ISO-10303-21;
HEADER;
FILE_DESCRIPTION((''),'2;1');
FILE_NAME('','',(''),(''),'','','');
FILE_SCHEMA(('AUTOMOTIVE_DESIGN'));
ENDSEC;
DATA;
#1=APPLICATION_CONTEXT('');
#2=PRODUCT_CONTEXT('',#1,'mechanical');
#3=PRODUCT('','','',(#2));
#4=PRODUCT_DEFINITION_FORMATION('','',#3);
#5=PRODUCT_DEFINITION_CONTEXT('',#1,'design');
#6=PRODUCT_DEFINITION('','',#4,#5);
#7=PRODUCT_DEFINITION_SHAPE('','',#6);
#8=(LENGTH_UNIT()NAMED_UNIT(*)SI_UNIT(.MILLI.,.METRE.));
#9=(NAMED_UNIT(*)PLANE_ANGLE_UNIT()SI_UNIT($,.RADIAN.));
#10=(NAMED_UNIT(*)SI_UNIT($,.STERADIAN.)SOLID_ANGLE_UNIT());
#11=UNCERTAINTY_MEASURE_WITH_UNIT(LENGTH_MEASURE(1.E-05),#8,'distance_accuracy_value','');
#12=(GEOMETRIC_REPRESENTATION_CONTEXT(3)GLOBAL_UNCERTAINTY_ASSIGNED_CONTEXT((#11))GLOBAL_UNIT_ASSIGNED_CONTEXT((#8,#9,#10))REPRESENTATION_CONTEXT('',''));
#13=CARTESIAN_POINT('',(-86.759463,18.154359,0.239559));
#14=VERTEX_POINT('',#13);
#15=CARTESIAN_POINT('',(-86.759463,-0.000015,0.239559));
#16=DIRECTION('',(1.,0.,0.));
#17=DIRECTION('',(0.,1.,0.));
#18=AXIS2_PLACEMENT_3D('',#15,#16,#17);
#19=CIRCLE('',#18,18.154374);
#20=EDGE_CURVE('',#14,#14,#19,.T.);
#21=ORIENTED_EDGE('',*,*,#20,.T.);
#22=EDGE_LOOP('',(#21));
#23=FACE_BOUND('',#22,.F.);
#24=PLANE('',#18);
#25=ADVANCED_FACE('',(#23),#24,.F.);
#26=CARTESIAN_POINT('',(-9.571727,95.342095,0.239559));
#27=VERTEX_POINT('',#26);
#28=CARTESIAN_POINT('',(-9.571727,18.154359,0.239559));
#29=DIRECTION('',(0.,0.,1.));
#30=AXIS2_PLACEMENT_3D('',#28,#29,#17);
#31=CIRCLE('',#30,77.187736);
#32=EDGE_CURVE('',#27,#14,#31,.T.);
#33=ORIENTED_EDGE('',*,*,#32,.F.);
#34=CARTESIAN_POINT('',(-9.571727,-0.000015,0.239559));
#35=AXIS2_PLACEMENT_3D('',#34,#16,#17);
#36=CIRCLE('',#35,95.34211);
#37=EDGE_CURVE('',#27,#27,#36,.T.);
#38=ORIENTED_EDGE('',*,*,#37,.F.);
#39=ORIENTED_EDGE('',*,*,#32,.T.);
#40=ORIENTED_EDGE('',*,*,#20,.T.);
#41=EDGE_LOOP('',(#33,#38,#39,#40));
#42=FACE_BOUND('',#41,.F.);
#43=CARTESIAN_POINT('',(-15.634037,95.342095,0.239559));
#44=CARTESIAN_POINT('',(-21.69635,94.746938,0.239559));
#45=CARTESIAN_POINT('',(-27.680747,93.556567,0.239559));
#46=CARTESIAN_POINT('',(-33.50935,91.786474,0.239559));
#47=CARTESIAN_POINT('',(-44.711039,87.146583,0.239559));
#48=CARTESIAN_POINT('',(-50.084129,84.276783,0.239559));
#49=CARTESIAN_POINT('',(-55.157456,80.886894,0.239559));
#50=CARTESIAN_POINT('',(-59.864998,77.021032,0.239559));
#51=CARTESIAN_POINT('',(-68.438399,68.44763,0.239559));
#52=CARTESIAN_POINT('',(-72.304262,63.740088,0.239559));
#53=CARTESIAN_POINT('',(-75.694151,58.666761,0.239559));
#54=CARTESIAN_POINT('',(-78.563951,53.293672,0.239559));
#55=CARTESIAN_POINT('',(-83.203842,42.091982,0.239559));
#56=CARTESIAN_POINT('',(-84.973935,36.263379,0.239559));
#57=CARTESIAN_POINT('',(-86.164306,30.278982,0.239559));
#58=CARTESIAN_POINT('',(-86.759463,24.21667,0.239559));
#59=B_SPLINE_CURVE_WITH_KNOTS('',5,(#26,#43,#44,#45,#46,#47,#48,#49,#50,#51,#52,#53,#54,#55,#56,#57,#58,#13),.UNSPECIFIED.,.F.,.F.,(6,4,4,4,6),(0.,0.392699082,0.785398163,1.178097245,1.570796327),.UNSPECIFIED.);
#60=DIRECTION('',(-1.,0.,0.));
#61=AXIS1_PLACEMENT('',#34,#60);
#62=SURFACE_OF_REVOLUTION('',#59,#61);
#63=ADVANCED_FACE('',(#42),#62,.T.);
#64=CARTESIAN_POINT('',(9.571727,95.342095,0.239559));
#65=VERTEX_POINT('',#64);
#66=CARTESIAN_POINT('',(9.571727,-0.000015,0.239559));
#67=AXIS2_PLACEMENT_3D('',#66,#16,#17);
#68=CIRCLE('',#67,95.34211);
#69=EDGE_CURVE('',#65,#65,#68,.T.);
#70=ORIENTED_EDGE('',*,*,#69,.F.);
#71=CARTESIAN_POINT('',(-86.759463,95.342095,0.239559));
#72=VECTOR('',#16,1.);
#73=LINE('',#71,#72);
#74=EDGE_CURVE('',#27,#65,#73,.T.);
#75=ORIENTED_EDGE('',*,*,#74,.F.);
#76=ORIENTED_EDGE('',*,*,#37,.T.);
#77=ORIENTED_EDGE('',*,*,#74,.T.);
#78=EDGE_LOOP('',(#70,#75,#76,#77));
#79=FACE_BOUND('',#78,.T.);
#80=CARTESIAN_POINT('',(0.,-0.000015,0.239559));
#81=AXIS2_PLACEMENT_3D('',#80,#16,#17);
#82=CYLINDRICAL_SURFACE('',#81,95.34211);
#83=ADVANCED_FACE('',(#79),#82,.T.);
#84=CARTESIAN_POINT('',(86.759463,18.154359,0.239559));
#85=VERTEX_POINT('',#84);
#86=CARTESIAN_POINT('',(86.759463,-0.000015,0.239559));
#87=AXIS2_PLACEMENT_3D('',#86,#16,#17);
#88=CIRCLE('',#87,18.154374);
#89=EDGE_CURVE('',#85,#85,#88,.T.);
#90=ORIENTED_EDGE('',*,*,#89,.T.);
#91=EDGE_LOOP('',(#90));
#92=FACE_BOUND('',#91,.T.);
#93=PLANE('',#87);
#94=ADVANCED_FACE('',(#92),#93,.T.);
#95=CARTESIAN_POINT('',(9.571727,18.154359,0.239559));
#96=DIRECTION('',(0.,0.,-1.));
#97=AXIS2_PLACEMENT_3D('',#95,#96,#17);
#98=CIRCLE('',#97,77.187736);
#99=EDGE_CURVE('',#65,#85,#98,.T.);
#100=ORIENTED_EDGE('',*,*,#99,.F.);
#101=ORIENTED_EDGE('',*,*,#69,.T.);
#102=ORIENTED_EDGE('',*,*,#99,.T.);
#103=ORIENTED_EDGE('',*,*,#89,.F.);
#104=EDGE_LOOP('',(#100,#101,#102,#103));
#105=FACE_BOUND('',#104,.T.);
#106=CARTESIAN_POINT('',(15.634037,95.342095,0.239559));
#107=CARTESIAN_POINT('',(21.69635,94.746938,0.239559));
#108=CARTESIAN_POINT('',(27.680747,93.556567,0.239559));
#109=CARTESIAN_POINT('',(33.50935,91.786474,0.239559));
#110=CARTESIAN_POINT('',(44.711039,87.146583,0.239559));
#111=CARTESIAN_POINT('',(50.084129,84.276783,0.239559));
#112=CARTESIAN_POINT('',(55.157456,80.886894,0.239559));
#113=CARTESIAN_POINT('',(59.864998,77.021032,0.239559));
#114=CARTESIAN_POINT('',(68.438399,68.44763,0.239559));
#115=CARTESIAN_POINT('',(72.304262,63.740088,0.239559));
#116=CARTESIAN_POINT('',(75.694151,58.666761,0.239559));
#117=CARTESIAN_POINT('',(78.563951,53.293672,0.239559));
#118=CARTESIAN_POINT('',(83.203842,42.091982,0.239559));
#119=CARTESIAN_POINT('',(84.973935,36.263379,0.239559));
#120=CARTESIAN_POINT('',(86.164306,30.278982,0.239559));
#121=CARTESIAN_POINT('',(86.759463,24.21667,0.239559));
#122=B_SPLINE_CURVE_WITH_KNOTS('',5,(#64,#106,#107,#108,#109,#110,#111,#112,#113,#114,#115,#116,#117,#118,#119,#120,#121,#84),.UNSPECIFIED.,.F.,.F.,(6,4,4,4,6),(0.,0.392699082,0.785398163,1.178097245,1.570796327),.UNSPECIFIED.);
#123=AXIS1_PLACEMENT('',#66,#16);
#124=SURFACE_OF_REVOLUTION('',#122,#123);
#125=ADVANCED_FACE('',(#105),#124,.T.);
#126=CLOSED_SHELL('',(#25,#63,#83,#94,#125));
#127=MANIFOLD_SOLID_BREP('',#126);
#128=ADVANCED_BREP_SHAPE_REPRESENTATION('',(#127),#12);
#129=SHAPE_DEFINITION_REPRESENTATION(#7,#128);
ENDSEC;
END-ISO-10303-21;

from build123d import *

# Parameters (mm, degrees)
F0_R     = 95.3421100221
F1_DEPTH = 86.7594629526
F2_R     = 77.1877360698


# Not quite as in the source:
# - the program builds the solid bodies; features that only make, move or delete a surface that nothing else refers to are left out


with BuildPart() as f1:
    # F0 (on Right) → F1 (new body, symmetric)
    with BuildSketch(Plane.YZ):
        with Locations((-1.49012e-05, 0.2395585179)):
            Circle(F0_R)
    extrude(amount=F1_DEPTH, both=True)

    # F2
    f2_edges = [f1.edges().sort_by_distance(p)[0] for p in [
        (-86.759463, -95.342125, 0.239559),
        (86.759463, -95.342125, 0.239559),
    ]]
    fillet(f2_edges, radius=F2_R)


solid = f1.part
